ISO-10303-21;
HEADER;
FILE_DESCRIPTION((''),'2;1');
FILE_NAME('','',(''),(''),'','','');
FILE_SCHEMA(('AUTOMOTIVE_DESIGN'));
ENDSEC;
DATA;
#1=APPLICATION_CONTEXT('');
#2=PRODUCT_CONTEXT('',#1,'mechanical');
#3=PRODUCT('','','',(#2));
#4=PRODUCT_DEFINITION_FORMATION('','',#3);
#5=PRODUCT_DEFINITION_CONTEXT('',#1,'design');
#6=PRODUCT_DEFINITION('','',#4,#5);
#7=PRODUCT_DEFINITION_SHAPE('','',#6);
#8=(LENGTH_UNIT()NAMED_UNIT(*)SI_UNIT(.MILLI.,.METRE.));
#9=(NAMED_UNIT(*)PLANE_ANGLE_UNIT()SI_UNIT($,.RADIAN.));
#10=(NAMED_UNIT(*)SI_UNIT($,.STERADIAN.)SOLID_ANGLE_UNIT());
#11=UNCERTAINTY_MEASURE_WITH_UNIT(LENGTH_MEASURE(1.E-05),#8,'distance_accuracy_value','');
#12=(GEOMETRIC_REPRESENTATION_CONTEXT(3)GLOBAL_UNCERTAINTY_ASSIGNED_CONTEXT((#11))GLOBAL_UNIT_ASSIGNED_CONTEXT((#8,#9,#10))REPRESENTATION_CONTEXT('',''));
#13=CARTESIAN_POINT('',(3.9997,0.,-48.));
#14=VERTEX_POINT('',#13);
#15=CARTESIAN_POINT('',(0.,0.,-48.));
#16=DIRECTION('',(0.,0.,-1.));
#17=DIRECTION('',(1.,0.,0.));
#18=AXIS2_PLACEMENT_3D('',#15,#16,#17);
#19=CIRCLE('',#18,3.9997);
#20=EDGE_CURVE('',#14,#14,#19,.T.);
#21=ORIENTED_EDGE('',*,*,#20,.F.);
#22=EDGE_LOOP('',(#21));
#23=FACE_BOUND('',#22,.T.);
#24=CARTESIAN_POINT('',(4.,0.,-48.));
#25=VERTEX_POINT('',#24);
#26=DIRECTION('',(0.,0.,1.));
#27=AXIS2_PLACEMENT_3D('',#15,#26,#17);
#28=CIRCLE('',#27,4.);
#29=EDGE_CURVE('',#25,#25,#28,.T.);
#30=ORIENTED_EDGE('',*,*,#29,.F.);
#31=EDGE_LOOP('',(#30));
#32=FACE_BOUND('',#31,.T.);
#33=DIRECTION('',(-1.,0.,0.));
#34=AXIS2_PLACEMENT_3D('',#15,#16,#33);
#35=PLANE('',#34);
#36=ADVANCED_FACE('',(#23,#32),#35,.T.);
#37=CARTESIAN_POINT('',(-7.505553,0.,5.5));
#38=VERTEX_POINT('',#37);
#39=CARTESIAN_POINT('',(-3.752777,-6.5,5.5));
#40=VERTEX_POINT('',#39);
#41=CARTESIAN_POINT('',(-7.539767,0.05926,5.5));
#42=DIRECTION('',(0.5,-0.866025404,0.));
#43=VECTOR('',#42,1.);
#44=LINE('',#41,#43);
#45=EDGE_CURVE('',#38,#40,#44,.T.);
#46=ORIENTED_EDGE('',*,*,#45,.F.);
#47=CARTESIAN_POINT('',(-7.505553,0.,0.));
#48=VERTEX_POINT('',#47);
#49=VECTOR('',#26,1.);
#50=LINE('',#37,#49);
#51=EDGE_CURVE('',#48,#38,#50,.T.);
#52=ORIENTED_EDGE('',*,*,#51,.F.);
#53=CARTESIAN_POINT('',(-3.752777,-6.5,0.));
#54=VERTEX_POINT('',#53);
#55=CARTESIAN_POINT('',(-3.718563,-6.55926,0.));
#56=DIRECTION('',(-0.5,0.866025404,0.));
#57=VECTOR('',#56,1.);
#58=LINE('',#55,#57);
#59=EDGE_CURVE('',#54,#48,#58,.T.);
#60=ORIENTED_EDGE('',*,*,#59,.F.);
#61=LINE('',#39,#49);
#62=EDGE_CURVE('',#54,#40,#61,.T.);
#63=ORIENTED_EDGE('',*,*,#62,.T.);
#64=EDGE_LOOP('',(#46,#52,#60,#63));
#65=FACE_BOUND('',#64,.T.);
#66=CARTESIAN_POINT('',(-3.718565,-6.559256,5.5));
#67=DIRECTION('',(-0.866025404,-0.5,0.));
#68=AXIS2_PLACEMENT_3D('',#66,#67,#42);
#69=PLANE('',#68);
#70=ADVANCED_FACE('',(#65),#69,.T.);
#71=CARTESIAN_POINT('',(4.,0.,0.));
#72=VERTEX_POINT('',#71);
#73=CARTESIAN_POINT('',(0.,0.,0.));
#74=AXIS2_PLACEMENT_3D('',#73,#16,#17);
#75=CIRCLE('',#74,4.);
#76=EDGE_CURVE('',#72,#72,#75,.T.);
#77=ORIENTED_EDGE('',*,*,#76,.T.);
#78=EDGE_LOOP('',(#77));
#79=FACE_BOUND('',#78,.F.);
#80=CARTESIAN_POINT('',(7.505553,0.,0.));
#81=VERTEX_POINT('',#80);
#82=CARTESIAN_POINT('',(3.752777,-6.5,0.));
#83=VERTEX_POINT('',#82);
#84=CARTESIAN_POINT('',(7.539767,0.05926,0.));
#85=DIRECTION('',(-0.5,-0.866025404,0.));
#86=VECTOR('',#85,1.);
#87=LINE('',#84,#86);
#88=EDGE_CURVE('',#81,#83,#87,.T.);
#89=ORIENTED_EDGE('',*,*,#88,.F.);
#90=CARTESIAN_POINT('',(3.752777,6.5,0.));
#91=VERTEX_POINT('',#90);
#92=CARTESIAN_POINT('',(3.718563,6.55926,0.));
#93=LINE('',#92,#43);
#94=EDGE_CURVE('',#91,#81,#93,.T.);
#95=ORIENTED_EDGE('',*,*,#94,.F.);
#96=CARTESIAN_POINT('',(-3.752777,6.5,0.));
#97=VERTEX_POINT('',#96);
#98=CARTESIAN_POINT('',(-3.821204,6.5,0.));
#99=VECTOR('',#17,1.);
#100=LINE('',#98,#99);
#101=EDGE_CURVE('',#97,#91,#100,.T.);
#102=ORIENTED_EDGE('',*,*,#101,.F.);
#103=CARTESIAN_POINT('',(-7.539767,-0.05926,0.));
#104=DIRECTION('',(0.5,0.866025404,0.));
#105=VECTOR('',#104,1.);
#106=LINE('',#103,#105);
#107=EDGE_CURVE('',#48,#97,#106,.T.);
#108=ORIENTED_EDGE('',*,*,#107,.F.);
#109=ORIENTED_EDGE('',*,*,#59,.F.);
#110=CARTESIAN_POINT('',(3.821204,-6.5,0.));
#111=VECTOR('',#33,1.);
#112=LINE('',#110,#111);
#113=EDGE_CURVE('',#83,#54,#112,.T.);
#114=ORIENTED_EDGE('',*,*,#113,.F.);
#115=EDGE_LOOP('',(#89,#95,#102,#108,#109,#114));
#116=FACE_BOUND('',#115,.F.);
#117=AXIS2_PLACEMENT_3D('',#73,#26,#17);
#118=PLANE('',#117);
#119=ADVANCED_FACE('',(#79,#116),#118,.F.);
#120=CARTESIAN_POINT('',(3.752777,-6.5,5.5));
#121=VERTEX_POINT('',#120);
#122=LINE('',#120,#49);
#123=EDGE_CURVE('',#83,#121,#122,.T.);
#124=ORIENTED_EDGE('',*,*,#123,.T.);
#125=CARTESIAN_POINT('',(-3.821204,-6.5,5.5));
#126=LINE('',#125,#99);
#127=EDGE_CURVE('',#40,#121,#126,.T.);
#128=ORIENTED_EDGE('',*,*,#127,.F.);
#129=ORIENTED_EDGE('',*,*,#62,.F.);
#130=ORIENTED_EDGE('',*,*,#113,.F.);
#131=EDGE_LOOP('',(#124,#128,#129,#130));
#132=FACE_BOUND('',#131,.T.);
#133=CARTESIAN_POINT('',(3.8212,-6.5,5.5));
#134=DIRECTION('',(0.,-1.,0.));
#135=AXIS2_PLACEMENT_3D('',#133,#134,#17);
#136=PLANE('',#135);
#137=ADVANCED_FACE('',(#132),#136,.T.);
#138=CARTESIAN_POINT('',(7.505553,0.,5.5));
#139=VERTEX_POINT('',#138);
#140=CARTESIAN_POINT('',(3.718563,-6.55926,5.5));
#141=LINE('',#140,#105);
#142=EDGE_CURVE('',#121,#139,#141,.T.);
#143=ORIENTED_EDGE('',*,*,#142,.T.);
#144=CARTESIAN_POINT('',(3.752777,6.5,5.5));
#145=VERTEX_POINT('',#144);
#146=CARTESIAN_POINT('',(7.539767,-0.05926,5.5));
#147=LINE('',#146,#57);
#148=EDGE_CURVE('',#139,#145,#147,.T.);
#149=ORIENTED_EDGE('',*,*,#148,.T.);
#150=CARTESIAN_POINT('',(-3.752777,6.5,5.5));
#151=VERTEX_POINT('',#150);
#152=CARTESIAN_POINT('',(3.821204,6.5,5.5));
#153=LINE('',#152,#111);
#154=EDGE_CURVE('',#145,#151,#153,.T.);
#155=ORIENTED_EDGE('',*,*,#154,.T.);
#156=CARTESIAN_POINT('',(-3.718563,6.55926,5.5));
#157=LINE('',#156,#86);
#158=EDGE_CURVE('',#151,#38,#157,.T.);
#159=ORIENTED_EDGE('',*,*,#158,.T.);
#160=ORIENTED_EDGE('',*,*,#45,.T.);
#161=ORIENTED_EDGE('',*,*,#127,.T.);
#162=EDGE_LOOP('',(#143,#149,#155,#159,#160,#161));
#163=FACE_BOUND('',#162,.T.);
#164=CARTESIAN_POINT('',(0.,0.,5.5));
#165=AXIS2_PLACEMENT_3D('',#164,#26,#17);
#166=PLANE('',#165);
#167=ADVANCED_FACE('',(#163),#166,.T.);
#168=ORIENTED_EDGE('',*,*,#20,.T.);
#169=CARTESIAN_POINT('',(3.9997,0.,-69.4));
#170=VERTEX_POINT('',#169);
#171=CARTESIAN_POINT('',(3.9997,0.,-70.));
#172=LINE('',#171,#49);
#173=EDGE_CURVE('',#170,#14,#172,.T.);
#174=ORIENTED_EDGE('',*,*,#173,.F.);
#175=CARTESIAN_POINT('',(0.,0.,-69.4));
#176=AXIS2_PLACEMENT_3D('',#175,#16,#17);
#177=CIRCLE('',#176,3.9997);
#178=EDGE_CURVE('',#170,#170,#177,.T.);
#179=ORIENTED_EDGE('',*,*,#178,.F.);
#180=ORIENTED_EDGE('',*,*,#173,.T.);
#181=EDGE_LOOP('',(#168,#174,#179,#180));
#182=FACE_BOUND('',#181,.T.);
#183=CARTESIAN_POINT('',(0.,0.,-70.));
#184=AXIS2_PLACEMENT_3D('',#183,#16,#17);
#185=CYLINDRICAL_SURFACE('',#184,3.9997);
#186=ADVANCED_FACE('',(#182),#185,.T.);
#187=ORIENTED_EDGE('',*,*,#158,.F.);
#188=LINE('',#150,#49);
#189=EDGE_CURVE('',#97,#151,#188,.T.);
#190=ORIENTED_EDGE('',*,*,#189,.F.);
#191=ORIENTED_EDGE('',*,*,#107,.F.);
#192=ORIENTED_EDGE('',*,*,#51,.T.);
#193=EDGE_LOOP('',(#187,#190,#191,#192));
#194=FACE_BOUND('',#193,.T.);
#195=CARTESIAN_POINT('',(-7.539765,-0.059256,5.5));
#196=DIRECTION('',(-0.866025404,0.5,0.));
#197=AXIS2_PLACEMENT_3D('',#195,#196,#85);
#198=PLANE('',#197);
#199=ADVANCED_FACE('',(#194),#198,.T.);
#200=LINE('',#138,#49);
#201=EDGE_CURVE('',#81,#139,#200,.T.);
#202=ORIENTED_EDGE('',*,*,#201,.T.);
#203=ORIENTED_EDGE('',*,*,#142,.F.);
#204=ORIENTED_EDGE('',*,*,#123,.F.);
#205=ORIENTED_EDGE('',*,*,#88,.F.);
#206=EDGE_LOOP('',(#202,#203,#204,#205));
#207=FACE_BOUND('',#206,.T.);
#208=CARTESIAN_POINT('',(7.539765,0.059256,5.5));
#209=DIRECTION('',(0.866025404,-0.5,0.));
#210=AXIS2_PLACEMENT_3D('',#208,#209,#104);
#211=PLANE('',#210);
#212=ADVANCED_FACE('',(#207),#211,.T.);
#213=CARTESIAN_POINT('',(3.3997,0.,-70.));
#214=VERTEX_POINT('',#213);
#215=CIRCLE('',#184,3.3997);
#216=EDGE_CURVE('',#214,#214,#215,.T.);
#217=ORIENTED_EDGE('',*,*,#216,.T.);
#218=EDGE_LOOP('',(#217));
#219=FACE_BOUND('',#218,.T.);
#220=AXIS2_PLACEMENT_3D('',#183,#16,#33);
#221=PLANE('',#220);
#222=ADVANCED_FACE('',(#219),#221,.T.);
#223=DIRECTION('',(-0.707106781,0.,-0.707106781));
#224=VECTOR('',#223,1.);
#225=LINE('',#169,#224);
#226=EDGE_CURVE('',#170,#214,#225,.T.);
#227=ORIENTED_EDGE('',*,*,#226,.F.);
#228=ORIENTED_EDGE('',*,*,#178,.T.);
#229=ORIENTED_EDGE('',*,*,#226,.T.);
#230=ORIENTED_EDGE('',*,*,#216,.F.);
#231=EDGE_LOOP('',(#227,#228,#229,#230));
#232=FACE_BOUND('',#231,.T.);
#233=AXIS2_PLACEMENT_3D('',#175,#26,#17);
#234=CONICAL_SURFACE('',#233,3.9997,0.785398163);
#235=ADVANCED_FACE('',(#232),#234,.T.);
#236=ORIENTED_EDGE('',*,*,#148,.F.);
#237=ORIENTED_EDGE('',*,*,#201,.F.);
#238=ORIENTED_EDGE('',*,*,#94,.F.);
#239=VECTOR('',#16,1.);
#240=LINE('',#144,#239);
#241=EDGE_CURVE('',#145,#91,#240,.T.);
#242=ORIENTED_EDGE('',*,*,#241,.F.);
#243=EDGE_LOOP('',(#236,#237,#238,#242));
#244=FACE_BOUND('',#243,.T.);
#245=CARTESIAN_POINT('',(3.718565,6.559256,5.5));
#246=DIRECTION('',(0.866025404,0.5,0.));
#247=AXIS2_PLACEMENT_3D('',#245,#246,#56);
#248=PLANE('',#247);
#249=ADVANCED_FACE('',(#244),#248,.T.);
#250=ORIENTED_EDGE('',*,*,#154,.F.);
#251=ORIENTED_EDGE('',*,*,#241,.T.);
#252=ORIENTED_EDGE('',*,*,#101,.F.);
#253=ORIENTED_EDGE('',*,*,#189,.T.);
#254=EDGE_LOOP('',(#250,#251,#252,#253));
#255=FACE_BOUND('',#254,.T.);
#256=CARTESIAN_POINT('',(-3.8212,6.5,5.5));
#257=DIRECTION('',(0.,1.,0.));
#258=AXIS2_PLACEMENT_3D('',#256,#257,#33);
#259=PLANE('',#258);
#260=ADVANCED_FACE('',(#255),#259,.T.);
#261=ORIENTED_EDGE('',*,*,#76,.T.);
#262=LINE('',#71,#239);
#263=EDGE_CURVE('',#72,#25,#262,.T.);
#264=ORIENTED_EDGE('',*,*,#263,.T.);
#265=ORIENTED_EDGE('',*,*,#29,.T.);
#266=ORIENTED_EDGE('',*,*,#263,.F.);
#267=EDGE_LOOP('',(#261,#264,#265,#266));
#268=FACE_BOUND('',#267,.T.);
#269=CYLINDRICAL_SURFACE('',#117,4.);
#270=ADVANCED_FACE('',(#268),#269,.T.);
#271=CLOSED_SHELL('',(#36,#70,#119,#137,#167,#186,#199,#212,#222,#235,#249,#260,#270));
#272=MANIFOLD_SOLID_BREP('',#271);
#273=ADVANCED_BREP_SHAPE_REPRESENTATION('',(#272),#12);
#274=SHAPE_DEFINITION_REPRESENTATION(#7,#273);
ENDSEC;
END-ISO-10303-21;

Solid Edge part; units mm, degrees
sketch "Sketch1" plane through (0, 0, 0) normal (0, 0, 1) x (1, 0, 0)
  circle A0 centre (0, 0) radius 7.54
extrude "Protrusion1" add sketch "Sketch1" along normal blind 5.5
sketch "Sketch2" plane through (0, 0, 0) normal (0, 0, -1) x (1, 0, 0)
  circle A0 centre (0, 0) radius 4
extrude "Protrusion2" add sketch "Sketch2" along normal blind 70
sketch "Sketch3" plane through (0, 0, -70) normal (0, 0, -1) x (1, 0, 0)
  circle A0 centre (0, 0) radius 3.9997
extrude "Cutout1" cut sketch "Sketch3" against normal blind 22 flip side to cut
chamfer "Chamfer_1" distance 0.6 angle 45 1 edges at (-3.9997, 0, -70)
sketch "Sketch4" plane through (0, 0, 5.5) normal (0, 0, 1) x (1, 0, 0)
  line L0 (-3.8212, 6.5) -> (3.8212, 6.5)
extrude "Cutout2" cut sketch "Sketch4" against normal up to next material side at (0, 6.55, 5.5)
pattern_circular "Pattern1" count 6 over 360 about axis through (0, 0, 5.5) along (0, 0, 1) of "Cutout2"
properties part number "24101205"
